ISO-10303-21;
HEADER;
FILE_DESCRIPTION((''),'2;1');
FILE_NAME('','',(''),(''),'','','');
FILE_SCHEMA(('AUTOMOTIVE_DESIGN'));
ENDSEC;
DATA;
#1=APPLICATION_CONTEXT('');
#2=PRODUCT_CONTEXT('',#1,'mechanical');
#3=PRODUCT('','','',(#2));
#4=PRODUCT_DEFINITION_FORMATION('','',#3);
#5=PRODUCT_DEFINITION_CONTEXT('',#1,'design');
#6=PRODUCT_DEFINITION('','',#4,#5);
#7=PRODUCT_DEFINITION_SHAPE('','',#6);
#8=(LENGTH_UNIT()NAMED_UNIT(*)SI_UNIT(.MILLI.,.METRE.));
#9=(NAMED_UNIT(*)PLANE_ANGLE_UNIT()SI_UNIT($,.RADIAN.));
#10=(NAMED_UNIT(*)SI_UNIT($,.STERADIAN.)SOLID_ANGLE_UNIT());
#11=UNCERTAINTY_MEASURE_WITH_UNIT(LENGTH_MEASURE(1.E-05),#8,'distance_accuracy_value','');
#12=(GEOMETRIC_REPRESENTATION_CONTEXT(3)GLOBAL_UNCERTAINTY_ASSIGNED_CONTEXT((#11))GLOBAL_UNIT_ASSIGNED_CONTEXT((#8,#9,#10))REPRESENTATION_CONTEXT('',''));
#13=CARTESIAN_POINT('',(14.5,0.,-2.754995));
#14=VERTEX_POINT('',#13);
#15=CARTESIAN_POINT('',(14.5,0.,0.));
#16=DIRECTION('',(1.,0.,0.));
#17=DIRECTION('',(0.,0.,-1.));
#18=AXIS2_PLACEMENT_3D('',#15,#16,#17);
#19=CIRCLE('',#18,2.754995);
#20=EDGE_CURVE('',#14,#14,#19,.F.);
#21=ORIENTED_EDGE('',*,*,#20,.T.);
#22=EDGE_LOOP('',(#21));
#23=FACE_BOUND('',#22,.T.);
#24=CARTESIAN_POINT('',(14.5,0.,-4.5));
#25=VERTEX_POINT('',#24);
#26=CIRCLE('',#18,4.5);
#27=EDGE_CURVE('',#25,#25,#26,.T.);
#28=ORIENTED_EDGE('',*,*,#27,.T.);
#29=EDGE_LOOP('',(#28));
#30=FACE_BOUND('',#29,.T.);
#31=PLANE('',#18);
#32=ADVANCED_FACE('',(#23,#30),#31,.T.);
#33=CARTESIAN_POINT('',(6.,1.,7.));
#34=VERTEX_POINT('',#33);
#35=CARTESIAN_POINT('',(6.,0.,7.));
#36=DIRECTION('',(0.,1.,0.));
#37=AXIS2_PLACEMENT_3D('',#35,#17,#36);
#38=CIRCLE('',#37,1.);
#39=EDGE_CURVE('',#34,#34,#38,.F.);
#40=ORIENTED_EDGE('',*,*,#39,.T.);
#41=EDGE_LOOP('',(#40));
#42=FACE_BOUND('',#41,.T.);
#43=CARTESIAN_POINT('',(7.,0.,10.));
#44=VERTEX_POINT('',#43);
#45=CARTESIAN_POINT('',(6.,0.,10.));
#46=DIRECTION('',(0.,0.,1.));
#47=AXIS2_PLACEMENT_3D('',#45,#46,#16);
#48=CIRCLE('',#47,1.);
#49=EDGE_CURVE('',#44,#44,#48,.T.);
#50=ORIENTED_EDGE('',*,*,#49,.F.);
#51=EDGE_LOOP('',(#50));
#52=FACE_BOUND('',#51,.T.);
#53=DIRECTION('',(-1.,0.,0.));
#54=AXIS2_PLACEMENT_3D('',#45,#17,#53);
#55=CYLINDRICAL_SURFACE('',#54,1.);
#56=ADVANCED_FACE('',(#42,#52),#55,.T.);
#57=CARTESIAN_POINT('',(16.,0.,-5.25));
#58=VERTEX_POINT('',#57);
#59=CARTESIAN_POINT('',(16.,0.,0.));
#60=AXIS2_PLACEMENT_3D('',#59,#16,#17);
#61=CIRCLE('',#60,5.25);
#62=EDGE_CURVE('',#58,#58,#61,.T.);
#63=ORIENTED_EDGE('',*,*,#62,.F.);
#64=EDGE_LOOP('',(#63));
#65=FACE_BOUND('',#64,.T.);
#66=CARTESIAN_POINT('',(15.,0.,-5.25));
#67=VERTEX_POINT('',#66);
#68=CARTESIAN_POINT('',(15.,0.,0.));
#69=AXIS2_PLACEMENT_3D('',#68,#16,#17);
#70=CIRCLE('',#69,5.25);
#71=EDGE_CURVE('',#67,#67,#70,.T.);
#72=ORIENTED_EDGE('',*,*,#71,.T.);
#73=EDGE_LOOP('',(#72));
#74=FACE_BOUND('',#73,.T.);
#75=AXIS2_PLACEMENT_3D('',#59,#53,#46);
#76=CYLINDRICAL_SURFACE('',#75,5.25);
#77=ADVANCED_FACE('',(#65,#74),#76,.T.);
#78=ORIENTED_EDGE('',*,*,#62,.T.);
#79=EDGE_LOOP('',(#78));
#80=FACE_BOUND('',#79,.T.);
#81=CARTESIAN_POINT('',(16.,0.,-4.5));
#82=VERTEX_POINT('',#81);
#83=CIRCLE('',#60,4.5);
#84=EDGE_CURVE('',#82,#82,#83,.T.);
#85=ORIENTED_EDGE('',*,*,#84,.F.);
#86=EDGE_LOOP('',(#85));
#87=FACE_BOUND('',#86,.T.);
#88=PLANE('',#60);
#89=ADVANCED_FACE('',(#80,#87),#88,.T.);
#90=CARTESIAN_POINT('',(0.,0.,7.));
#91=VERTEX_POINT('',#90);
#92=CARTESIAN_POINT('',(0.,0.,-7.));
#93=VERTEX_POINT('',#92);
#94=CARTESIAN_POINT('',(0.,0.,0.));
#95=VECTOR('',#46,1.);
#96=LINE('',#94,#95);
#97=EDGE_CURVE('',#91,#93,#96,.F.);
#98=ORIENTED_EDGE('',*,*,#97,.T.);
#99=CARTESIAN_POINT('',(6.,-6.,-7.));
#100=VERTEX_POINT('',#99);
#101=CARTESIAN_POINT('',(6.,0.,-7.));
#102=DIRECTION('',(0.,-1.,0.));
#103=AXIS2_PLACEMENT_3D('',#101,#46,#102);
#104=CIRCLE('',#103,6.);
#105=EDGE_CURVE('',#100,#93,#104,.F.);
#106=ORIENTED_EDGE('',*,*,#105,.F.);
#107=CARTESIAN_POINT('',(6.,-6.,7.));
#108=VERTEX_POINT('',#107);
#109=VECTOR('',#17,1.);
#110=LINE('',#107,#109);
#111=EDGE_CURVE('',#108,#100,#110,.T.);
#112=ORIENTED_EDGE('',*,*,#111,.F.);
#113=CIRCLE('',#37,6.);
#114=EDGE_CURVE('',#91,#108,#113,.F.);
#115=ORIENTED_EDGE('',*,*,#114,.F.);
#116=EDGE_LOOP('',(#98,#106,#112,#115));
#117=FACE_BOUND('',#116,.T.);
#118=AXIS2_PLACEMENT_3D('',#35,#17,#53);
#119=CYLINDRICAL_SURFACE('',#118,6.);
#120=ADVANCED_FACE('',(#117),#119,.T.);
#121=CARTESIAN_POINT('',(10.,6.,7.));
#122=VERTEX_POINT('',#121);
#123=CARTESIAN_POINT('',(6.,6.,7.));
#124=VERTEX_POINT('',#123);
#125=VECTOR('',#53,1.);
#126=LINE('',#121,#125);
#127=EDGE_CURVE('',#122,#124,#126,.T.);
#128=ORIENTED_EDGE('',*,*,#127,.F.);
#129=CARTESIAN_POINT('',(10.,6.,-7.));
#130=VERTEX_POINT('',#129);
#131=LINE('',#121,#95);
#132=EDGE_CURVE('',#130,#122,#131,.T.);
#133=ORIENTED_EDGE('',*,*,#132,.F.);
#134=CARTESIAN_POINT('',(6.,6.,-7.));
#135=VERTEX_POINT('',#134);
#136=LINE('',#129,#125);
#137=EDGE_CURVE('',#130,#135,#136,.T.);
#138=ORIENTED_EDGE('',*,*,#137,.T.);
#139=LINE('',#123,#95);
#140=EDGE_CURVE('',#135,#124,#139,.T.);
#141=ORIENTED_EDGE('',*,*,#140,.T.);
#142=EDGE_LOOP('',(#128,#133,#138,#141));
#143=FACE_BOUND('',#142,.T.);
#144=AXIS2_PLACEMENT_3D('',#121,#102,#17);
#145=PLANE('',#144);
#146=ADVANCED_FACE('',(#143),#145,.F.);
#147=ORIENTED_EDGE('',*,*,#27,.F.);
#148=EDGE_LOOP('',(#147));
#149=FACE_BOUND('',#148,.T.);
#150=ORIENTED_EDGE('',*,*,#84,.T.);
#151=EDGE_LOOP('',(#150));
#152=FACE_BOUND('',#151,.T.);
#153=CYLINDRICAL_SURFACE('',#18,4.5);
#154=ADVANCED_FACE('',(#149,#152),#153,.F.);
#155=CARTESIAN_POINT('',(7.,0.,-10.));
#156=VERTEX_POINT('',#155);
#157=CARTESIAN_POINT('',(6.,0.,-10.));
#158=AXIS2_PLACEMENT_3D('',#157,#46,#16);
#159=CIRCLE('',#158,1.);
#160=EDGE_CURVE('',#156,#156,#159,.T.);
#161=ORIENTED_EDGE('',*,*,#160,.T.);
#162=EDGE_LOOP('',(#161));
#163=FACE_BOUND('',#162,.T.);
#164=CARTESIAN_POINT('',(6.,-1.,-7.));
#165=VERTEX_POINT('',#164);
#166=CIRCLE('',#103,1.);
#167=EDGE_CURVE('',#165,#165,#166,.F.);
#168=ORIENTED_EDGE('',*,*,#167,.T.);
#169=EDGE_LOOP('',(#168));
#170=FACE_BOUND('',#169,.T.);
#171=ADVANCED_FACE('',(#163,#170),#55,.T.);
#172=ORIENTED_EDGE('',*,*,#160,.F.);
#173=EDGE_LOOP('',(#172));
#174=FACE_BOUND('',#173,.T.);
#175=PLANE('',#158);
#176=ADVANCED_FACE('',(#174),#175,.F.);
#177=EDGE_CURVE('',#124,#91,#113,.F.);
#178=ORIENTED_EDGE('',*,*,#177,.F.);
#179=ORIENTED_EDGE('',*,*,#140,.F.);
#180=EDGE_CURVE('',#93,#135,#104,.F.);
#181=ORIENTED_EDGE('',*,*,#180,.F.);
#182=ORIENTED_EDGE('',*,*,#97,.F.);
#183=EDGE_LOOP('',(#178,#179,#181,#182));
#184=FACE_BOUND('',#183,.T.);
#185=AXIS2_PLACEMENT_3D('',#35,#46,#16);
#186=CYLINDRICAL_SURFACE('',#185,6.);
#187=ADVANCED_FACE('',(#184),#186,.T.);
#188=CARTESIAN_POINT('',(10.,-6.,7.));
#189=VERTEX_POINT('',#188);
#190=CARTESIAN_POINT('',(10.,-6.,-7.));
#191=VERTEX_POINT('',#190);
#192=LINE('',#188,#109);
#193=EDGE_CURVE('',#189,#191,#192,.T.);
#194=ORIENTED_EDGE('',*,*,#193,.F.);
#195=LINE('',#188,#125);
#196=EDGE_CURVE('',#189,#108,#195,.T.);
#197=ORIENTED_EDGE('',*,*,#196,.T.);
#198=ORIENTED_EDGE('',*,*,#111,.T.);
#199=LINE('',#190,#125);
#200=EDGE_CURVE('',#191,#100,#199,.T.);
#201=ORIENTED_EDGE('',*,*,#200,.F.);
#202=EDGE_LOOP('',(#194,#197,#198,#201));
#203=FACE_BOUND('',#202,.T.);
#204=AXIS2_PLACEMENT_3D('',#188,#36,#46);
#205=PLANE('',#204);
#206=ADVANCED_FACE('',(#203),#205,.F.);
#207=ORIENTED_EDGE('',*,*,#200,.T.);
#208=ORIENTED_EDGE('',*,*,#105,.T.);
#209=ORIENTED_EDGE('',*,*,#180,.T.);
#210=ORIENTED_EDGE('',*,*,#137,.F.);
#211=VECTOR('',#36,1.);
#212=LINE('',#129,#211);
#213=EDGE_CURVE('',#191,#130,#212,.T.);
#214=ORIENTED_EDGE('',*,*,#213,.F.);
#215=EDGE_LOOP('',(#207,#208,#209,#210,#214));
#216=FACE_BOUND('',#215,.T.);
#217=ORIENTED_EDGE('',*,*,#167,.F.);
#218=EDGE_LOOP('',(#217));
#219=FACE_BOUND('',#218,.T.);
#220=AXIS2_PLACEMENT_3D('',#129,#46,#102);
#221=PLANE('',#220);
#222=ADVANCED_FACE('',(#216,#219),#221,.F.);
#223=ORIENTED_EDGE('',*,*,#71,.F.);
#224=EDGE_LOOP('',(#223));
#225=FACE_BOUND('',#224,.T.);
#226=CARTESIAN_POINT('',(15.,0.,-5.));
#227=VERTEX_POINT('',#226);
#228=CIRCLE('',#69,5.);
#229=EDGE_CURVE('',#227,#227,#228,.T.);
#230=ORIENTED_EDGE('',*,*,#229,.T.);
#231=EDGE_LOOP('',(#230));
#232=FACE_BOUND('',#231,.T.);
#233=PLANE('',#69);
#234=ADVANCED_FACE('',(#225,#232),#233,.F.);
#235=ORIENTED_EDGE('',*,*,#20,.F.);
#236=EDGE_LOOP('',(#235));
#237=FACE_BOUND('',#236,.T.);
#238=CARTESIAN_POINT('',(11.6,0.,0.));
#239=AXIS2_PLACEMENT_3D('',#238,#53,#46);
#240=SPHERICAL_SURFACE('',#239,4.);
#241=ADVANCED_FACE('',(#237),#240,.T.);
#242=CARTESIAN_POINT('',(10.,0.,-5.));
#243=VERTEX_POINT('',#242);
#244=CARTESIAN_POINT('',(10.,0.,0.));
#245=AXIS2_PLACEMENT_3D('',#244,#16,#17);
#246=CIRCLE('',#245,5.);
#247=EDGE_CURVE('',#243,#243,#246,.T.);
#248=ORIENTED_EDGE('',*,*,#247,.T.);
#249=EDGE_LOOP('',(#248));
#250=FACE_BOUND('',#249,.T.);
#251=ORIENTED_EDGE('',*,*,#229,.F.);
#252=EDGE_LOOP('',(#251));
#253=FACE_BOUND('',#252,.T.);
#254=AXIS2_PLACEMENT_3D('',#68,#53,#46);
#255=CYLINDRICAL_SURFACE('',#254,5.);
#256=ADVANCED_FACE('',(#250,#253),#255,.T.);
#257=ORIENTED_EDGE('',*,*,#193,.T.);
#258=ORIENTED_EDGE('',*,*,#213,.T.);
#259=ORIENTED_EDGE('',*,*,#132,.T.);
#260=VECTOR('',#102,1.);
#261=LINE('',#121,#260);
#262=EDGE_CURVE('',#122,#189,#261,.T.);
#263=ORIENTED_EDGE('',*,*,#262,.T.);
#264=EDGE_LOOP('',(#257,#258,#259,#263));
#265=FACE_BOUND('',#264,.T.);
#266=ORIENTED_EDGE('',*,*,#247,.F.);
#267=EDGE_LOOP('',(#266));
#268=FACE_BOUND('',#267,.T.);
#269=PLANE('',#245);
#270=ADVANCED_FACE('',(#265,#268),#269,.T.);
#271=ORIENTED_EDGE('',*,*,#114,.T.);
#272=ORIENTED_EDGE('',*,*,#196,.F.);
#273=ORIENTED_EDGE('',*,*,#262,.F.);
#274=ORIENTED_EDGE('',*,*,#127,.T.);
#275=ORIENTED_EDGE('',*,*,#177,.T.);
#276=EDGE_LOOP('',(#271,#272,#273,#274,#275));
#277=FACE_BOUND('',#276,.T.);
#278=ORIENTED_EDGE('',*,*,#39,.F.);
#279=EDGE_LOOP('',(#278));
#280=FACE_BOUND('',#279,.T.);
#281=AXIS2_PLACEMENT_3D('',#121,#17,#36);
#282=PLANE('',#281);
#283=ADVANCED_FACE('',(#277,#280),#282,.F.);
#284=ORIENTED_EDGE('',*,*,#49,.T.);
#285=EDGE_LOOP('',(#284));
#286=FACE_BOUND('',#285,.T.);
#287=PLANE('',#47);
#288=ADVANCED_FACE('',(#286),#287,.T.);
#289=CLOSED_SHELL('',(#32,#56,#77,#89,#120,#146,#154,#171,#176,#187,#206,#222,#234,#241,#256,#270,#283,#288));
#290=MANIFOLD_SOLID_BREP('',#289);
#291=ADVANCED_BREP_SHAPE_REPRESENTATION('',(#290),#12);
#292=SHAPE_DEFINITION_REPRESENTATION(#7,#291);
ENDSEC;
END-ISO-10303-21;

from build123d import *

# Parameters (mm, degrees)
SKETCH1_W           = 14
SKETCH1_H           = 12
BOSS_EXTRUDE1_DEPTH = 10
SKETCH2_R           = 5
BOSS_EXTRUDE2_DEPTH = 5
SKETCH3_R           = 5.25
BOSS_EXTRUDE3_DEPTH = 1
SKETCH5_R           = 4.5
CUT_EXTRUDE1_DEPTH  = 1.5
FILLET1_R           = 6
SKETCH11_R          = 1
BOSS_EXTRUDE4_DEPTH = 10


with BuildPart() as part:
    # Sketch1 → Boss-Extrude1 (new body)
    with BuildSketch(Plane(origin=(0, 0, 0), x_dir=(0, 0, -1), z_dir=(1, 0, 0))):
        Rectangle(SKETCH1_W, SKETCH1_H)
    extrude(amount=BOSS_EXTRUDE1_DEPTH)

    # Sketch2 → Boss-Extrude2 (add)
    with BuildSketch(Plane(origin=(10, 0, 0), x_dir=(0, 0, -1), z_dir=(1, 0, 0))):
        Circle(SKETCH2_R)
    extrude(amount=BOSS_EXTRUDE2_DEPTH)

    # Sketch3 → Boss-Extrude3 (add)
    with BuildSketch(Plane(origin=(15, 0, 0), x_dir=(0, 0, -1), z_dir=(1, 0, 0))):
        Circle(SKETCH3_R)
    extrude(amount=BOSS_EXTRUDE3_DEPTH)

    # Sketch5 → Cut-Extrude1 (cut)
    with BuildSketch(Plane(origin=(16, 0, 0), x_dir=(0, 0, -1), z_dir=(1, 0, 0))):
        Circle(SKETCH5_R)
    extrude(amount=-CUT_EXTRUDE1_DEPTH, mode=Mode.SUBTRACT)

    # Sketch6 → Revolve2 (revolve)
    with BuildSketch(Plane(origin=(0, 0, 0), x_dir=(1, 0, 0), z_dir=(0, 1, 0)), mode=Mode.PRIVATE) as revolve2_sk:
        with BuildLine():
            Line((11.6, 0), (15.6, 0))
            ThreePointArc((15.6, 0), (14.428427125, 2.828427125), (11.6, 4))
            Line((11.6, 4), (11.6, 0))
        make_face()
    revolve(revolve2_sk.sketch.rotate(Axis((11.6, 0, 0), (1, 0, 0)), 180), axis=Axis((11.6, 0, 0), (1, 0, 0)))

    # Fillet1
    fillet1_edges = [part.edges().sort_by_distance(p)[0] for p in [
        (0, -6, 0),
        (0, 6, 0),
    ]]
    fillet(fillet1_edges, radius=FILLET1_R - 0.0001)  # a hair under: the kernel refuses the full size

    # Sketch11 → Boss-Extrude4 (add, symmetric)
    with BuildSketch(Plane.XY):
        with Locations(Location((6, 0, 0), (0, 0, 90))):
            Circle(SKETCH11_R)
    extrude(amount=BOSS_EXTRUDE4_DEPTH, both=True)


solid = part.part
